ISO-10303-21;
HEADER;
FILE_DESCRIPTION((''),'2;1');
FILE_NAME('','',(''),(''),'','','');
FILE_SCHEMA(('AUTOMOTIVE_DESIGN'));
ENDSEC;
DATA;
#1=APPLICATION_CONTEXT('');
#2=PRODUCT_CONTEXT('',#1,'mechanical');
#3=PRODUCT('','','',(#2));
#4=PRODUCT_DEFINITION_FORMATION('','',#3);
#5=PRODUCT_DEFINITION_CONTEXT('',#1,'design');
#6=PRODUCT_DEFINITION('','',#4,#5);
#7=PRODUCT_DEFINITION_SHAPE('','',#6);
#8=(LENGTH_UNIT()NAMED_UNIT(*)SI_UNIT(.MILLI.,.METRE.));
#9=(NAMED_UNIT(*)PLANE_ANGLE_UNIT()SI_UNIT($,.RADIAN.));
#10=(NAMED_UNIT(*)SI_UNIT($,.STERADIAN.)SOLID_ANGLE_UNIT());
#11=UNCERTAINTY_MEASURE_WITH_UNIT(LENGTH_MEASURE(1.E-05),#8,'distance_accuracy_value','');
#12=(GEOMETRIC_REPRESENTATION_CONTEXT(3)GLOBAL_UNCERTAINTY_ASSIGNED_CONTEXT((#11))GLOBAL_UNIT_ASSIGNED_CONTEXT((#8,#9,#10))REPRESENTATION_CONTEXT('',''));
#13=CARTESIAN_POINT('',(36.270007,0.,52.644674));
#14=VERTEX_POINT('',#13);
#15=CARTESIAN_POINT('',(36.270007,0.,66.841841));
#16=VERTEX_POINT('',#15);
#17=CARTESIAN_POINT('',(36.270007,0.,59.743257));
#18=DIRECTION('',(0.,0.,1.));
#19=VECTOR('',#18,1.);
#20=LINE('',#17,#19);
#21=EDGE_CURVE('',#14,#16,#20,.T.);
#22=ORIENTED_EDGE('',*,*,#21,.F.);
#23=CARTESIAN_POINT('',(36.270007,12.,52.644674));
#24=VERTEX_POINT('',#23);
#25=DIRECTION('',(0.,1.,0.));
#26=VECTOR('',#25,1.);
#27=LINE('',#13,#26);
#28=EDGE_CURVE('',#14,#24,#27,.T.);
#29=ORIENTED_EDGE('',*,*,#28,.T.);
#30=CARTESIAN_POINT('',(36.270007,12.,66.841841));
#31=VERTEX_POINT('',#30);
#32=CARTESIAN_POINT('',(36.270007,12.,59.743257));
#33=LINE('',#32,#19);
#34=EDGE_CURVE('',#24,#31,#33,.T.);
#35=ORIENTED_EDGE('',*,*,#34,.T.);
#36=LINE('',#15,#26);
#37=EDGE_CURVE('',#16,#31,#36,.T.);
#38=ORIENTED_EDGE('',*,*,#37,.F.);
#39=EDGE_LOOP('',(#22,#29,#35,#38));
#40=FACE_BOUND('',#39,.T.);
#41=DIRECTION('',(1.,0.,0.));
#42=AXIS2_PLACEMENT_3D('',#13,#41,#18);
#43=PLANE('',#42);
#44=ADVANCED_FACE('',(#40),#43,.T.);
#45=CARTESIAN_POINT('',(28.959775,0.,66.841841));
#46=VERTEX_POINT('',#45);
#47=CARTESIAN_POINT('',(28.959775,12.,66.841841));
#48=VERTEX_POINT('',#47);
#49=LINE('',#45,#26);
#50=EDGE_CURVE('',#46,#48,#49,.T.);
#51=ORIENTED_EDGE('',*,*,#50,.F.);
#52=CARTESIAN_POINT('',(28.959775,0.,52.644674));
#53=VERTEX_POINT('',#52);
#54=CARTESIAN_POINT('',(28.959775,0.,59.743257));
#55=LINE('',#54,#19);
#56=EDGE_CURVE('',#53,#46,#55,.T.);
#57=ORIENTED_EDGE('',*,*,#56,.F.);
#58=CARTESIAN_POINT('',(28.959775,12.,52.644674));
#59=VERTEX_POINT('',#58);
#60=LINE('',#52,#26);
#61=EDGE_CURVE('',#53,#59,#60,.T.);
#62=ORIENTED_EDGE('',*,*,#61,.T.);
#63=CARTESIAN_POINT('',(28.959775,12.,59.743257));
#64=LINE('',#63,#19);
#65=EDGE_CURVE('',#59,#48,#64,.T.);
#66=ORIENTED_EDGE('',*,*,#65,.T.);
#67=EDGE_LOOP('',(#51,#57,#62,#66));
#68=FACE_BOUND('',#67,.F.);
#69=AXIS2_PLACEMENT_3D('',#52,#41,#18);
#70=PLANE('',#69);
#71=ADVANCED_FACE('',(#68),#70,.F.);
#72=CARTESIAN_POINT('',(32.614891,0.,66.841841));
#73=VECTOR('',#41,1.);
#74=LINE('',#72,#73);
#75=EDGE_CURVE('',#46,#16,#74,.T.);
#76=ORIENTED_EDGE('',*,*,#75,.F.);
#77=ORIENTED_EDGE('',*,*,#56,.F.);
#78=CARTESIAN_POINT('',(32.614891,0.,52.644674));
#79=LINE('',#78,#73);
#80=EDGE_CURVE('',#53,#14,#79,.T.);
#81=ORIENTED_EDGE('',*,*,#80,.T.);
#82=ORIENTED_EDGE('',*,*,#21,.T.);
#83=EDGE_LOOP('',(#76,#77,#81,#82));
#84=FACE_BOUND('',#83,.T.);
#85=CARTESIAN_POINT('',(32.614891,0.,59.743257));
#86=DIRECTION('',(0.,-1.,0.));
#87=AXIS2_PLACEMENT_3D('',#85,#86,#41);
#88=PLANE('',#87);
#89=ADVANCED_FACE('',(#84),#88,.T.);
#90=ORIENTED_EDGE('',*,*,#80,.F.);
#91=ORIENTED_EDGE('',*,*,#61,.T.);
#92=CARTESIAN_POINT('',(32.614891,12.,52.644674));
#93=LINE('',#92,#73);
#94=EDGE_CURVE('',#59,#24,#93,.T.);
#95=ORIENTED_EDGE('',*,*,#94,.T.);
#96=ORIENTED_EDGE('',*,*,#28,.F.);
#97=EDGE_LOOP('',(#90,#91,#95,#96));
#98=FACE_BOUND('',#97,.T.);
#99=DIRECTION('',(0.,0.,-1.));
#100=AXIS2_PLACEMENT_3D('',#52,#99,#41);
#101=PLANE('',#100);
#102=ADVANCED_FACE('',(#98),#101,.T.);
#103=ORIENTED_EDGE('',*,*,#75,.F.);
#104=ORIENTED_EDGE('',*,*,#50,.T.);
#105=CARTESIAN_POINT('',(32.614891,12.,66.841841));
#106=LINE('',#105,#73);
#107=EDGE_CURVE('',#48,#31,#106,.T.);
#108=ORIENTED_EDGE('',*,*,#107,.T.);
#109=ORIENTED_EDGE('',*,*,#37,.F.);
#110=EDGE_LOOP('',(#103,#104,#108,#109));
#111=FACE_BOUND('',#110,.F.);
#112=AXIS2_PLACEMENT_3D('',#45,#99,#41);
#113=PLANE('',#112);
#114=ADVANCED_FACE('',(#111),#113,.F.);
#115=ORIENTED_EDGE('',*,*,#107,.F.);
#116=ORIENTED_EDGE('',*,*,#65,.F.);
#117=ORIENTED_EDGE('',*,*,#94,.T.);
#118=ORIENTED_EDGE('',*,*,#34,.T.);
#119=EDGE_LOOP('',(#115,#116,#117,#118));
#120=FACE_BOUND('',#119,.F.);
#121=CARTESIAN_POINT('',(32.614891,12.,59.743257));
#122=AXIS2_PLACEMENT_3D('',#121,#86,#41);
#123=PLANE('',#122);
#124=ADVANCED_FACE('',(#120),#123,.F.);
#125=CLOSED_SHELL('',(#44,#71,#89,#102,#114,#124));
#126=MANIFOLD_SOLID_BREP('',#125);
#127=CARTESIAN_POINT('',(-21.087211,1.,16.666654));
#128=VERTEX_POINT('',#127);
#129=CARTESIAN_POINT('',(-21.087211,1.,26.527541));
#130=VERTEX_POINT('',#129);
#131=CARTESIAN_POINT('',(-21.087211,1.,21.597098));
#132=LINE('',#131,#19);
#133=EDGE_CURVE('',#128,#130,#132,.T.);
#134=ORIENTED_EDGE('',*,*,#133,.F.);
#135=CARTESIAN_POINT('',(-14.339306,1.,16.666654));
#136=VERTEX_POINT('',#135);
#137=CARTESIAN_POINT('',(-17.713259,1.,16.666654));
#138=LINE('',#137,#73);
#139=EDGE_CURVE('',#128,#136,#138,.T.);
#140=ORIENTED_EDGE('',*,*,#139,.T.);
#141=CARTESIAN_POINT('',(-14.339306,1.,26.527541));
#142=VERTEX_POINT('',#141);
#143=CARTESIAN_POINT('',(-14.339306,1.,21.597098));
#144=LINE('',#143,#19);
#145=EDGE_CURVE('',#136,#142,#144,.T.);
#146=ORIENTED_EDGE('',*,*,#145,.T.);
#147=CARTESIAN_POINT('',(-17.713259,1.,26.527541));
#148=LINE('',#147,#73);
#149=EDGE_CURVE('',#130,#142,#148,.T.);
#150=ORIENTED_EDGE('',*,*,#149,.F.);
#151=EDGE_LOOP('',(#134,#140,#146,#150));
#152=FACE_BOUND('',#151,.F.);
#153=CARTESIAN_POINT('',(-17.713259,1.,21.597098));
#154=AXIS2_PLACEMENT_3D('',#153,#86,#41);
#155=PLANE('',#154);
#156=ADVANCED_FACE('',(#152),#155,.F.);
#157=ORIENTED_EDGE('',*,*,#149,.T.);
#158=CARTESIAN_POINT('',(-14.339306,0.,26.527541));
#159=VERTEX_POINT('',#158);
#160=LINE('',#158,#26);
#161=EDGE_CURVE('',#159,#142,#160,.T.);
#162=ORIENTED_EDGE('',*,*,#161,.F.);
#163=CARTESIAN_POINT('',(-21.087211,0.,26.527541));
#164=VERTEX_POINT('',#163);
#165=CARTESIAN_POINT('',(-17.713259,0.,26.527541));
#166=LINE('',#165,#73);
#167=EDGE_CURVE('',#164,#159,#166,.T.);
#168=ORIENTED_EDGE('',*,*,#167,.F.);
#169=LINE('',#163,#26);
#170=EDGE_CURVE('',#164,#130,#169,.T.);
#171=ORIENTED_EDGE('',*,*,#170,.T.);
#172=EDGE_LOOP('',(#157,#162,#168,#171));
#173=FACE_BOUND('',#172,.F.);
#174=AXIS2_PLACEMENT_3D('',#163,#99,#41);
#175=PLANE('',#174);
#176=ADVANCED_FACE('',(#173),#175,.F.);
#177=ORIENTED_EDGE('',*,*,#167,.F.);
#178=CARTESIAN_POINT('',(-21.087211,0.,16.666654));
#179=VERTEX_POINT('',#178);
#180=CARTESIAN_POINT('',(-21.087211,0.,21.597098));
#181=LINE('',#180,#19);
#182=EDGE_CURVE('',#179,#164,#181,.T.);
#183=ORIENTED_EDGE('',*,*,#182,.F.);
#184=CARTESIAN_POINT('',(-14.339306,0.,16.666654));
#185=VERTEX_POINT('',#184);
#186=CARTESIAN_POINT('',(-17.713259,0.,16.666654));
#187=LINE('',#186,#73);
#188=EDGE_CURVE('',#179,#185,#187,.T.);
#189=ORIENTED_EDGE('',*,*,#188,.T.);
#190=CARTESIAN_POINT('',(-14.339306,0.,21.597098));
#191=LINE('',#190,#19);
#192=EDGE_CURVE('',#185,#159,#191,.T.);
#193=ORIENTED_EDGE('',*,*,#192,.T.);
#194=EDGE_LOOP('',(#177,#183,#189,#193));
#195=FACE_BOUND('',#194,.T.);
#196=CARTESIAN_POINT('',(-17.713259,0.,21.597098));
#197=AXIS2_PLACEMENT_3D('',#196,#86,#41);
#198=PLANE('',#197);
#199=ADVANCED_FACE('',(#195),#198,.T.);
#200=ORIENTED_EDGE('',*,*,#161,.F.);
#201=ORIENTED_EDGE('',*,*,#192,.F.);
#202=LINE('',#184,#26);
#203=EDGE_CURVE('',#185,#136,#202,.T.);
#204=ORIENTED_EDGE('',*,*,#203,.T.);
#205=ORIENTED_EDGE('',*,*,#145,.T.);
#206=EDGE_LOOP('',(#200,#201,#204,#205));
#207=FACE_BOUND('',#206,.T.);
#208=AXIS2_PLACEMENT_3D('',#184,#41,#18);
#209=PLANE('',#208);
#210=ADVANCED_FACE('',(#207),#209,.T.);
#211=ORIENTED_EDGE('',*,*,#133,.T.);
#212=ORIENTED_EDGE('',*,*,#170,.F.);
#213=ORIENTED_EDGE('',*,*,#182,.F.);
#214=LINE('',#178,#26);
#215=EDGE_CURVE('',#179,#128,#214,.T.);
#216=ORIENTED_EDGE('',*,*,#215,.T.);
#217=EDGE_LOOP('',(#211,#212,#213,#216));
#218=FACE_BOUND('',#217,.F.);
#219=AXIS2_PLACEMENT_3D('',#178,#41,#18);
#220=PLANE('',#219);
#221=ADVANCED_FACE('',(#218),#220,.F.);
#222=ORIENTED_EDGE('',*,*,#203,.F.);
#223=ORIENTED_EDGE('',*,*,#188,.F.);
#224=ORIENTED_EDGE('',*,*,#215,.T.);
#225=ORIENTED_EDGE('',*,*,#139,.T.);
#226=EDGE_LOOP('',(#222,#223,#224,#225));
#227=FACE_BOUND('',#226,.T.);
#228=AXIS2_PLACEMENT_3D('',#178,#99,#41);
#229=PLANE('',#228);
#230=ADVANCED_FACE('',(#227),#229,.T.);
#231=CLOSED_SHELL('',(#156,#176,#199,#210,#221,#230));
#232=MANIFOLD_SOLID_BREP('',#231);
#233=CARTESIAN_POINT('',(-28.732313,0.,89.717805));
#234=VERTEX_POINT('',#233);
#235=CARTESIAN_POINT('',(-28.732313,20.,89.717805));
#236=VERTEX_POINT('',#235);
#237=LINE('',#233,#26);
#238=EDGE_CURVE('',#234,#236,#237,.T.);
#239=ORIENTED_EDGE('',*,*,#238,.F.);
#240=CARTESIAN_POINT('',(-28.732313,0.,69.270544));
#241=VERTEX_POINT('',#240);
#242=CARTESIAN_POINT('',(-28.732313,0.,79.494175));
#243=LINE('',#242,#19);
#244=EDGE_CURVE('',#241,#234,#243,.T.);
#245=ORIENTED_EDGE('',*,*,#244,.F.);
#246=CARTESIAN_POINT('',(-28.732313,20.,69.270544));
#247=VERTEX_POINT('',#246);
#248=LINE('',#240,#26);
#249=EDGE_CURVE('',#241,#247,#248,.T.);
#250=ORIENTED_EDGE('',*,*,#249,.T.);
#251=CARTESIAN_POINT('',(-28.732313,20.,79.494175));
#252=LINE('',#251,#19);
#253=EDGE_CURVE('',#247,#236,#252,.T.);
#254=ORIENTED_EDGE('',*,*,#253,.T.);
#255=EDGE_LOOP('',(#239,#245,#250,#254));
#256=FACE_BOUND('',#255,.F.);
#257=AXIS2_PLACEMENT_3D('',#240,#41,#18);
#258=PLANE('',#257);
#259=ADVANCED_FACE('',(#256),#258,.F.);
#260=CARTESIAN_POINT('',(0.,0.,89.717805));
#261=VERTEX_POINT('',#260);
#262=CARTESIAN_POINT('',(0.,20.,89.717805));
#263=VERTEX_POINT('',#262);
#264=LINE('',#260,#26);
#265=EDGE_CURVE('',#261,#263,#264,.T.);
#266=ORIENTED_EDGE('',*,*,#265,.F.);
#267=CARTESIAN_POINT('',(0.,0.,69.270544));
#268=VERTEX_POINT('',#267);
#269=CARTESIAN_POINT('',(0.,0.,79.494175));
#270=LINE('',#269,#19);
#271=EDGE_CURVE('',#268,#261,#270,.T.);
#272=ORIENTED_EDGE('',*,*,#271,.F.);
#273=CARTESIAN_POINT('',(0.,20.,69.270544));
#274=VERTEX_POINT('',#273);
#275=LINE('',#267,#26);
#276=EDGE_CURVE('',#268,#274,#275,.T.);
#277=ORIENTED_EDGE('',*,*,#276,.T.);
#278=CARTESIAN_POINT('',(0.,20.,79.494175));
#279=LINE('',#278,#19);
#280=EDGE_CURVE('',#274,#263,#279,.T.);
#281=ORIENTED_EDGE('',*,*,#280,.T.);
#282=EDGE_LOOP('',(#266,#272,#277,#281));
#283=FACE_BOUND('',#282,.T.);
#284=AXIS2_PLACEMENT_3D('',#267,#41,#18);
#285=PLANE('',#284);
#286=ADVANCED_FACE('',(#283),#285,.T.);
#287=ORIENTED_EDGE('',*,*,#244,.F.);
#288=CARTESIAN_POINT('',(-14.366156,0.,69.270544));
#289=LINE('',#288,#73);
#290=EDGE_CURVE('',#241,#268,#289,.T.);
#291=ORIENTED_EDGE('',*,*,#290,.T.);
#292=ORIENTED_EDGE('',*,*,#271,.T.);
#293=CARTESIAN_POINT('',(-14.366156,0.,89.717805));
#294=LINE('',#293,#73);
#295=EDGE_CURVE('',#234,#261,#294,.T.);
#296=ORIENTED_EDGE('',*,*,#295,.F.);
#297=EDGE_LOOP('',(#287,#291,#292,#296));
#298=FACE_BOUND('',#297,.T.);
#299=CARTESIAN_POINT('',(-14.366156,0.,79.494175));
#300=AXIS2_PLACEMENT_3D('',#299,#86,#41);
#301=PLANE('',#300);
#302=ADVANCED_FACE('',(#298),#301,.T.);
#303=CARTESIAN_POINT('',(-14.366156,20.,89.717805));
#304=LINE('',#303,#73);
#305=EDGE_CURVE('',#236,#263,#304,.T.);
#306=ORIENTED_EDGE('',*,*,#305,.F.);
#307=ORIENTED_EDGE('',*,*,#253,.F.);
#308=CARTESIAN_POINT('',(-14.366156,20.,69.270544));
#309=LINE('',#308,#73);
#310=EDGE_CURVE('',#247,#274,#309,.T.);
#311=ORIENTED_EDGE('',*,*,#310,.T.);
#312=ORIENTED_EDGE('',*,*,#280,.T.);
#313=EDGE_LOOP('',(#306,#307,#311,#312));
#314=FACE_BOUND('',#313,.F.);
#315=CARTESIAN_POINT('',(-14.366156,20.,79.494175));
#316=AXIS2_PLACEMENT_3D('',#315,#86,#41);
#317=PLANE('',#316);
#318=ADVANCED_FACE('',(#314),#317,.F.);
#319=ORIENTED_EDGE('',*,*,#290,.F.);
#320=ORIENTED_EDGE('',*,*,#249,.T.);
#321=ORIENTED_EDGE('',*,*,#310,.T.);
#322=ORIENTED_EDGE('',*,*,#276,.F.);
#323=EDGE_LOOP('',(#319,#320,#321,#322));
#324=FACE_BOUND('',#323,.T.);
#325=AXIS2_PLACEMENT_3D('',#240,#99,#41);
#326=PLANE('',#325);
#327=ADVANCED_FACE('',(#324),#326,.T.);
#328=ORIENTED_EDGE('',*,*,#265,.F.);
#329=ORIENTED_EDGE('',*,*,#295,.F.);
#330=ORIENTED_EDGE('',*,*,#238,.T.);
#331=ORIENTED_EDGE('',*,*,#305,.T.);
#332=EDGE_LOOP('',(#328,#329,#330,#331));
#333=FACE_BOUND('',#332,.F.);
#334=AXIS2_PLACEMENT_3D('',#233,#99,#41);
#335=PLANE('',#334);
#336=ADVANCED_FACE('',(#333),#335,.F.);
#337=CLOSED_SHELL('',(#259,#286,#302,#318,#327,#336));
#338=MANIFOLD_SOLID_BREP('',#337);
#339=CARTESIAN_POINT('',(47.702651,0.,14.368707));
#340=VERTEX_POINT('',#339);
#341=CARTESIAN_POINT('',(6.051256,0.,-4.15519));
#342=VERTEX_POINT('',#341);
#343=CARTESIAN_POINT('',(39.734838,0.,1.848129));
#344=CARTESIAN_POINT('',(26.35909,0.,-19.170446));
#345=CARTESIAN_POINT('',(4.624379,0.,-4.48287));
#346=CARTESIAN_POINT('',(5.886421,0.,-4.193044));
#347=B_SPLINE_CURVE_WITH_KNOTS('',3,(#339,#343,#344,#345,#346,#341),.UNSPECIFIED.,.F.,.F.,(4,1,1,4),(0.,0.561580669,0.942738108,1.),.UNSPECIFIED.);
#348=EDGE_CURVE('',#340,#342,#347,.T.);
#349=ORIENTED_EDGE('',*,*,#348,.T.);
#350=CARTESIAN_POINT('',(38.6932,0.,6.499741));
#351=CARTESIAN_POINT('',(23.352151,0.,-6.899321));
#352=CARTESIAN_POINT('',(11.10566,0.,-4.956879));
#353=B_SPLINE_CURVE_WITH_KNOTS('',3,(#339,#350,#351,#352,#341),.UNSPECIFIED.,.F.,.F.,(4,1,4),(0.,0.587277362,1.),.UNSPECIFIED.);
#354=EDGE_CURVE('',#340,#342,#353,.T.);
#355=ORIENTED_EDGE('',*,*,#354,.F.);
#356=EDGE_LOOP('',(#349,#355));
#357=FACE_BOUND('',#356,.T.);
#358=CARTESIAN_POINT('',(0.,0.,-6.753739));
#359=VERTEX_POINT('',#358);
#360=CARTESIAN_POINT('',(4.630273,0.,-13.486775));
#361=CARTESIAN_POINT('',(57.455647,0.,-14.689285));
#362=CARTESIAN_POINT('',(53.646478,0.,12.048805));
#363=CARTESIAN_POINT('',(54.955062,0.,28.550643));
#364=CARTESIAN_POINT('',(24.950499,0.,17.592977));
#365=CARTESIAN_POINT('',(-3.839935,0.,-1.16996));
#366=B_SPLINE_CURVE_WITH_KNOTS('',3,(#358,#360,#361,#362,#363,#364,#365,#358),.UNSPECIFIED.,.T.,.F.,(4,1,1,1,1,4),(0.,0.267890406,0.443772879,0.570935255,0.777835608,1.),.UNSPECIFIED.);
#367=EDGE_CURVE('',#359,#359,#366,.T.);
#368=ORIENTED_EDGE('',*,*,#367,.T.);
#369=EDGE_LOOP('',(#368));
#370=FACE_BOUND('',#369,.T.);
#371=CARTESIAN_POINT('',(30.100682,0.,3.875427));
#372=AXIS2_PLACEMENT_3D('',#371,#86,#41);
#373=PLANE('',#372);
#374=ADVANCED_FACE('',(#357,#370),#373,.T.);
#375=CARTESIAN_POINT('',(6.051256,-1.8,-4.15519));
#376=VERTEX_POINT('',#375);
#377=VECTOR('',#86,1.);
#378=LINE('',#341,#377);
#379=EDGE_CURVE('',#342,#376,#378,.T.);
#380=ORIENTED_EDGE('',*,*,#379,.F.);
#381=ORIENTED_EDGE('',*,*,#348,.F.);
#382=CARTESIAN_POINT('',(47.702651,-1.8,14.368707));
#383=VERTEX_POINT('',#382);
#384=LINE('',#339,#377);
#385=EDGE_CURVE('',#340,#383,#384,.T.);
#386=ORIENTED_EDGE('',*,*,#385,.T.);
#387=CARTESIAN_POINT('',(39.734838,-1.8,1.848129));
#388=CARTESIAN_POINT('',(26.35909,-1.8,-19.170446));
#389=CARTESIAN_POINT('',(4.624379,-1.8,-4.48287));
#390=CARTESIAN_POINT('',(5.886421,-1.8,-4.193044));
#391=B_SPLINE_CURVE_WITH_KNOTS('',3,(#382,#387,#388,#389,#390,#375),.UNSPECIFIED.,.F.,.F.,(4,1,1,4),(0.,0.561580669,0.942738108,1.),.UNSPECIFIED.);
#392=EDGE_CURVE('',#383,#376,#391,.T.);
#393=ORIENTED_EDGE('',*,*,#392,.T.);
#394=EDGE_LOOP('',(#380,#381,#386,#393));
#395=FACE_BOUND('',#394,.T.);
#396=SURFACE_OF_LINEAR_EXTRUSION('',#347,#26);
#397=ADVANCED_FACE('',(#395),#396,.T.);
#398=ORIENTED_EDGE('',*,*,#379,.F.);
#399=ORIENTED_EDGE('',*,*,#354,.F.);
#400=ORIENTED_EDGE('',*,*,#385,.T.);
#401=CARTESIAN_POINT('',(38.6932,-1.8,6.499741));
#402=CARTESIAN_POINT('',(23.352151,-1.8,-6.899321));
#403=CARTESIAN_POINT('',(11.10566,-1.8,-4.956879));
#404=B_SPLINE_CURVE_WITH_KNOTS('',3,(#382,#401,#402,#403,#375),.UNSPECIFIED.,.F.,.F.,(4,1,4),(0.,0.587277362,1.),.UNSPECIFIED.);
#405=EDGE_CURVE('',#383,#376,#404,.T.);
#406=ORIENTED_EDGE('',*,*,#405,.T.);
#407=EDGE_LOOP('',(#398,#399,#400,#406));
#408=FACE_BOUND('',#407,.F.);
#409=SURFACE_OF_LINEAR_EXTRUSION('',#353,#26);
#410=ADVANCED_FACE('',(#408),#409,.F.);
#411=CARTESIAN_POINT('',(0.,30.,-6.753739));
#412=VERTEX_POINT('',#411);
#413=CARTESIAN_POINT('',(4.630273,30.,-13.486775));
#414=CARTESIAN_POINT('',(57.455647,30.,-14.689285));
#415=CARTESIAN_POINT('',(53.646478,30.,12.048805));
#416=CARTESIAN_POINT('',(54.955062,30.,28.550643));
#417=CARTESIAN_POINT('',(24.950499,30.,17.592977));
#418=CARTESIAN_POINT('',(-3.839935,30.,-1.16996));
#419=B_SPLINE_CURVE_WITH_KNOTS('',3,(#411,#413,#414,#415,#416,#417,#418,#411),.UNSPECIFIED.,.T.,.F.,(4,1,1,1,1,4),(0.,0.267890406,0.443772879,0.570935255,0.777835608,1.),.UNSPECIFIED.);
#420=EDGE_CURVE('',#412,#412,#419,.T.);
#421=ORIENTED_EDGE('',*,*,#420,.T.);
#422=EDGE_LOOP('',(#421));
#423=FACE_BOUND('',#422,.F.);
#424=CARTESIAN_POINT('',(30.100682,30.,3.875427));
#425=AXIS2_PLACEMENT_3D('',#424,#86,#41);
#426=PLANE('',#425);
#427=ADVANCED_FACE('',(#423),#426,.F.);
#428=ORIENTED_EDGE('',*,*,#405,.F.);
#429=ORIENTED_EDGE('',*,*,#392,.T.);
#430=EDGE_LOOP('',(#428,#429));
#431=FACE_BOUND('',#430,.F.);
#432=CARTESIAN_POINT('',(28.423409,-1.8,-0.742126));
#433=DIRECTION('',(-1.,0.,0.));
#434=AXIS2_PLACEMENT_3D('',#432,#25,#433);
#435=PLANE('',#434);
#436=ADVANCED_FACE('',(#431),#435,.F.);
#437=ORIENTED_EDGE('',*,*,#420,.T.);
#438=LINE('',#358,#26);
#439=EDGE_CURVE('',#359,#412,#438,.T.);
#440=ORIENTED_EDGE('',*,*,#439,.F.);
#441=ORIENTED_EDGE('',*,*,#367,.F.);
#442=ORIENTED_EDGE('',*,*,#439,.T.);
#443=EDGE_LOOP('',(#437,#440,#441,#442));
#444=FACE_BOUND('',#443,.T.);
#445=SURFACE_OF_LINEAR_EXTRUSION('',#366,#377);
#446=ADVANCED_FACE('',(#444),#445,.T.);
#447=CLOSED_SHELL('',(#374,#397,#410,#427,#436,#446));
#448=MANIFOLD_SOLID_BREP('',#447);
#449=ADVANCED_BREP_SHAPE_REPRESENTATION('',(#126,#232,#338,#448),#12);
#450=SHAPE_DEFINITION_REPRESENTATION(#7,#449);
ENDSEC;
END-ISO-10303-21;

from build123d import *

# Parameters (mm, degrees)
F1_DEPTH  = 30
F2_W      = 28.7323128432
F2_H      = 20.4472616315
F3_DEPTH  = 20
F4_W      = 7.3102321476
F4_H      = 14.1971670091
F5_DEPTH  = 12
F6_W      = 6.7479042336
F6_H      = 9.8608862609
F7_DEPTH  = 1
F12_DEPTH = 1.8


# Not quite as in the source:
# - the program builds the solid bodies; features that only make, move or delete a surface that nothing else refers to are left out


with BuildPart() as f1:
    # F0 (on Front) → F1 (new body)
    with BuildSketch(Plane.XZ):
        with BuildLine():
            add(Edge.make_bspline(
                [(0, -6.7537389696), (4.6302731937, -13.4867750862), (57.4556467963, -14.6892854363), (53.6464783261, 12.0488052166), (54.9550616853, 28.5506433284), (24.9504990775, 17.5929765935), (-3.8399352956, -1.1699597951), (0, -6.7537389696)],
                knots=[0, 0, 0, 0, 0.2678904064, 0.4437728792, 0.5709352547, 0.7778356084, 1, 1, 1, 1], degree=3))
        make_face()
    extrude(amount=-F1_DEPTH)

    # F11 (on face) → F12 (join)
    with BuildSketch(Plane.XZ):
        with BuildLine():
            add(Edge.make_bspline(
                [(47.7026514709, 14.3687073141), (39.7348380228, 1.8481294782), (26.3590902699, -19.1704463134), (4.6243785504, -4.4828704433), (5.8864211069, -4.1930439331), (6.0512563214, -4.1551897302)],
                knots=[0, 0, 0, 0, 0.5615806693, 0.9427381081, 1, 1, 1, 1], degree=3))
            add(Edge.make_bspline(
                [(47.7026514709, 14.3687073141), (38.6932003586, 6.4997414698), (23.3521508086, -6.8993206285), (11.1056602211, -4.956879257), (6.0512563214, -4.1551897302)],
                knots=[0, 0, 0, 0, 0.5872773621, 1, 1, 1, 1], degree=3))
        make_face()
    extrude(amount=F12_DEPTH)


with BuildPart() as f3:
    # F2 (on Front) → F3 (new body)
    with BuildSketch(Plane.XZ):
        with Locations((-14.3661564216, 79.4941745698)):
            Rectangle(F2_W, F2_H)
    extrude(amount=-F3_DEPTH)


with BuildPart() as f5:
    # F4 (on Front) → F5 (new body)
    with BuildSketch(Plane.XZ):
        with Locations((32.6148914173, 59.7432572395)):
            Rectangle(F4_W, F4_H)
    extrude(amount=-F5_DEPTH)


with BuildPart() as f7:
    # F6 (on Front) → F7 (new body)
    with BuildSketch(Plane.XZ):
        with Locations((-17.7132585086, 21.5970976278)):
            Rectangle(F6_W, F6_H)
    extrude(amount=-F7_DEPTH)


solid = Compound([f1.part, f3.part, f5.part, f7.part])
